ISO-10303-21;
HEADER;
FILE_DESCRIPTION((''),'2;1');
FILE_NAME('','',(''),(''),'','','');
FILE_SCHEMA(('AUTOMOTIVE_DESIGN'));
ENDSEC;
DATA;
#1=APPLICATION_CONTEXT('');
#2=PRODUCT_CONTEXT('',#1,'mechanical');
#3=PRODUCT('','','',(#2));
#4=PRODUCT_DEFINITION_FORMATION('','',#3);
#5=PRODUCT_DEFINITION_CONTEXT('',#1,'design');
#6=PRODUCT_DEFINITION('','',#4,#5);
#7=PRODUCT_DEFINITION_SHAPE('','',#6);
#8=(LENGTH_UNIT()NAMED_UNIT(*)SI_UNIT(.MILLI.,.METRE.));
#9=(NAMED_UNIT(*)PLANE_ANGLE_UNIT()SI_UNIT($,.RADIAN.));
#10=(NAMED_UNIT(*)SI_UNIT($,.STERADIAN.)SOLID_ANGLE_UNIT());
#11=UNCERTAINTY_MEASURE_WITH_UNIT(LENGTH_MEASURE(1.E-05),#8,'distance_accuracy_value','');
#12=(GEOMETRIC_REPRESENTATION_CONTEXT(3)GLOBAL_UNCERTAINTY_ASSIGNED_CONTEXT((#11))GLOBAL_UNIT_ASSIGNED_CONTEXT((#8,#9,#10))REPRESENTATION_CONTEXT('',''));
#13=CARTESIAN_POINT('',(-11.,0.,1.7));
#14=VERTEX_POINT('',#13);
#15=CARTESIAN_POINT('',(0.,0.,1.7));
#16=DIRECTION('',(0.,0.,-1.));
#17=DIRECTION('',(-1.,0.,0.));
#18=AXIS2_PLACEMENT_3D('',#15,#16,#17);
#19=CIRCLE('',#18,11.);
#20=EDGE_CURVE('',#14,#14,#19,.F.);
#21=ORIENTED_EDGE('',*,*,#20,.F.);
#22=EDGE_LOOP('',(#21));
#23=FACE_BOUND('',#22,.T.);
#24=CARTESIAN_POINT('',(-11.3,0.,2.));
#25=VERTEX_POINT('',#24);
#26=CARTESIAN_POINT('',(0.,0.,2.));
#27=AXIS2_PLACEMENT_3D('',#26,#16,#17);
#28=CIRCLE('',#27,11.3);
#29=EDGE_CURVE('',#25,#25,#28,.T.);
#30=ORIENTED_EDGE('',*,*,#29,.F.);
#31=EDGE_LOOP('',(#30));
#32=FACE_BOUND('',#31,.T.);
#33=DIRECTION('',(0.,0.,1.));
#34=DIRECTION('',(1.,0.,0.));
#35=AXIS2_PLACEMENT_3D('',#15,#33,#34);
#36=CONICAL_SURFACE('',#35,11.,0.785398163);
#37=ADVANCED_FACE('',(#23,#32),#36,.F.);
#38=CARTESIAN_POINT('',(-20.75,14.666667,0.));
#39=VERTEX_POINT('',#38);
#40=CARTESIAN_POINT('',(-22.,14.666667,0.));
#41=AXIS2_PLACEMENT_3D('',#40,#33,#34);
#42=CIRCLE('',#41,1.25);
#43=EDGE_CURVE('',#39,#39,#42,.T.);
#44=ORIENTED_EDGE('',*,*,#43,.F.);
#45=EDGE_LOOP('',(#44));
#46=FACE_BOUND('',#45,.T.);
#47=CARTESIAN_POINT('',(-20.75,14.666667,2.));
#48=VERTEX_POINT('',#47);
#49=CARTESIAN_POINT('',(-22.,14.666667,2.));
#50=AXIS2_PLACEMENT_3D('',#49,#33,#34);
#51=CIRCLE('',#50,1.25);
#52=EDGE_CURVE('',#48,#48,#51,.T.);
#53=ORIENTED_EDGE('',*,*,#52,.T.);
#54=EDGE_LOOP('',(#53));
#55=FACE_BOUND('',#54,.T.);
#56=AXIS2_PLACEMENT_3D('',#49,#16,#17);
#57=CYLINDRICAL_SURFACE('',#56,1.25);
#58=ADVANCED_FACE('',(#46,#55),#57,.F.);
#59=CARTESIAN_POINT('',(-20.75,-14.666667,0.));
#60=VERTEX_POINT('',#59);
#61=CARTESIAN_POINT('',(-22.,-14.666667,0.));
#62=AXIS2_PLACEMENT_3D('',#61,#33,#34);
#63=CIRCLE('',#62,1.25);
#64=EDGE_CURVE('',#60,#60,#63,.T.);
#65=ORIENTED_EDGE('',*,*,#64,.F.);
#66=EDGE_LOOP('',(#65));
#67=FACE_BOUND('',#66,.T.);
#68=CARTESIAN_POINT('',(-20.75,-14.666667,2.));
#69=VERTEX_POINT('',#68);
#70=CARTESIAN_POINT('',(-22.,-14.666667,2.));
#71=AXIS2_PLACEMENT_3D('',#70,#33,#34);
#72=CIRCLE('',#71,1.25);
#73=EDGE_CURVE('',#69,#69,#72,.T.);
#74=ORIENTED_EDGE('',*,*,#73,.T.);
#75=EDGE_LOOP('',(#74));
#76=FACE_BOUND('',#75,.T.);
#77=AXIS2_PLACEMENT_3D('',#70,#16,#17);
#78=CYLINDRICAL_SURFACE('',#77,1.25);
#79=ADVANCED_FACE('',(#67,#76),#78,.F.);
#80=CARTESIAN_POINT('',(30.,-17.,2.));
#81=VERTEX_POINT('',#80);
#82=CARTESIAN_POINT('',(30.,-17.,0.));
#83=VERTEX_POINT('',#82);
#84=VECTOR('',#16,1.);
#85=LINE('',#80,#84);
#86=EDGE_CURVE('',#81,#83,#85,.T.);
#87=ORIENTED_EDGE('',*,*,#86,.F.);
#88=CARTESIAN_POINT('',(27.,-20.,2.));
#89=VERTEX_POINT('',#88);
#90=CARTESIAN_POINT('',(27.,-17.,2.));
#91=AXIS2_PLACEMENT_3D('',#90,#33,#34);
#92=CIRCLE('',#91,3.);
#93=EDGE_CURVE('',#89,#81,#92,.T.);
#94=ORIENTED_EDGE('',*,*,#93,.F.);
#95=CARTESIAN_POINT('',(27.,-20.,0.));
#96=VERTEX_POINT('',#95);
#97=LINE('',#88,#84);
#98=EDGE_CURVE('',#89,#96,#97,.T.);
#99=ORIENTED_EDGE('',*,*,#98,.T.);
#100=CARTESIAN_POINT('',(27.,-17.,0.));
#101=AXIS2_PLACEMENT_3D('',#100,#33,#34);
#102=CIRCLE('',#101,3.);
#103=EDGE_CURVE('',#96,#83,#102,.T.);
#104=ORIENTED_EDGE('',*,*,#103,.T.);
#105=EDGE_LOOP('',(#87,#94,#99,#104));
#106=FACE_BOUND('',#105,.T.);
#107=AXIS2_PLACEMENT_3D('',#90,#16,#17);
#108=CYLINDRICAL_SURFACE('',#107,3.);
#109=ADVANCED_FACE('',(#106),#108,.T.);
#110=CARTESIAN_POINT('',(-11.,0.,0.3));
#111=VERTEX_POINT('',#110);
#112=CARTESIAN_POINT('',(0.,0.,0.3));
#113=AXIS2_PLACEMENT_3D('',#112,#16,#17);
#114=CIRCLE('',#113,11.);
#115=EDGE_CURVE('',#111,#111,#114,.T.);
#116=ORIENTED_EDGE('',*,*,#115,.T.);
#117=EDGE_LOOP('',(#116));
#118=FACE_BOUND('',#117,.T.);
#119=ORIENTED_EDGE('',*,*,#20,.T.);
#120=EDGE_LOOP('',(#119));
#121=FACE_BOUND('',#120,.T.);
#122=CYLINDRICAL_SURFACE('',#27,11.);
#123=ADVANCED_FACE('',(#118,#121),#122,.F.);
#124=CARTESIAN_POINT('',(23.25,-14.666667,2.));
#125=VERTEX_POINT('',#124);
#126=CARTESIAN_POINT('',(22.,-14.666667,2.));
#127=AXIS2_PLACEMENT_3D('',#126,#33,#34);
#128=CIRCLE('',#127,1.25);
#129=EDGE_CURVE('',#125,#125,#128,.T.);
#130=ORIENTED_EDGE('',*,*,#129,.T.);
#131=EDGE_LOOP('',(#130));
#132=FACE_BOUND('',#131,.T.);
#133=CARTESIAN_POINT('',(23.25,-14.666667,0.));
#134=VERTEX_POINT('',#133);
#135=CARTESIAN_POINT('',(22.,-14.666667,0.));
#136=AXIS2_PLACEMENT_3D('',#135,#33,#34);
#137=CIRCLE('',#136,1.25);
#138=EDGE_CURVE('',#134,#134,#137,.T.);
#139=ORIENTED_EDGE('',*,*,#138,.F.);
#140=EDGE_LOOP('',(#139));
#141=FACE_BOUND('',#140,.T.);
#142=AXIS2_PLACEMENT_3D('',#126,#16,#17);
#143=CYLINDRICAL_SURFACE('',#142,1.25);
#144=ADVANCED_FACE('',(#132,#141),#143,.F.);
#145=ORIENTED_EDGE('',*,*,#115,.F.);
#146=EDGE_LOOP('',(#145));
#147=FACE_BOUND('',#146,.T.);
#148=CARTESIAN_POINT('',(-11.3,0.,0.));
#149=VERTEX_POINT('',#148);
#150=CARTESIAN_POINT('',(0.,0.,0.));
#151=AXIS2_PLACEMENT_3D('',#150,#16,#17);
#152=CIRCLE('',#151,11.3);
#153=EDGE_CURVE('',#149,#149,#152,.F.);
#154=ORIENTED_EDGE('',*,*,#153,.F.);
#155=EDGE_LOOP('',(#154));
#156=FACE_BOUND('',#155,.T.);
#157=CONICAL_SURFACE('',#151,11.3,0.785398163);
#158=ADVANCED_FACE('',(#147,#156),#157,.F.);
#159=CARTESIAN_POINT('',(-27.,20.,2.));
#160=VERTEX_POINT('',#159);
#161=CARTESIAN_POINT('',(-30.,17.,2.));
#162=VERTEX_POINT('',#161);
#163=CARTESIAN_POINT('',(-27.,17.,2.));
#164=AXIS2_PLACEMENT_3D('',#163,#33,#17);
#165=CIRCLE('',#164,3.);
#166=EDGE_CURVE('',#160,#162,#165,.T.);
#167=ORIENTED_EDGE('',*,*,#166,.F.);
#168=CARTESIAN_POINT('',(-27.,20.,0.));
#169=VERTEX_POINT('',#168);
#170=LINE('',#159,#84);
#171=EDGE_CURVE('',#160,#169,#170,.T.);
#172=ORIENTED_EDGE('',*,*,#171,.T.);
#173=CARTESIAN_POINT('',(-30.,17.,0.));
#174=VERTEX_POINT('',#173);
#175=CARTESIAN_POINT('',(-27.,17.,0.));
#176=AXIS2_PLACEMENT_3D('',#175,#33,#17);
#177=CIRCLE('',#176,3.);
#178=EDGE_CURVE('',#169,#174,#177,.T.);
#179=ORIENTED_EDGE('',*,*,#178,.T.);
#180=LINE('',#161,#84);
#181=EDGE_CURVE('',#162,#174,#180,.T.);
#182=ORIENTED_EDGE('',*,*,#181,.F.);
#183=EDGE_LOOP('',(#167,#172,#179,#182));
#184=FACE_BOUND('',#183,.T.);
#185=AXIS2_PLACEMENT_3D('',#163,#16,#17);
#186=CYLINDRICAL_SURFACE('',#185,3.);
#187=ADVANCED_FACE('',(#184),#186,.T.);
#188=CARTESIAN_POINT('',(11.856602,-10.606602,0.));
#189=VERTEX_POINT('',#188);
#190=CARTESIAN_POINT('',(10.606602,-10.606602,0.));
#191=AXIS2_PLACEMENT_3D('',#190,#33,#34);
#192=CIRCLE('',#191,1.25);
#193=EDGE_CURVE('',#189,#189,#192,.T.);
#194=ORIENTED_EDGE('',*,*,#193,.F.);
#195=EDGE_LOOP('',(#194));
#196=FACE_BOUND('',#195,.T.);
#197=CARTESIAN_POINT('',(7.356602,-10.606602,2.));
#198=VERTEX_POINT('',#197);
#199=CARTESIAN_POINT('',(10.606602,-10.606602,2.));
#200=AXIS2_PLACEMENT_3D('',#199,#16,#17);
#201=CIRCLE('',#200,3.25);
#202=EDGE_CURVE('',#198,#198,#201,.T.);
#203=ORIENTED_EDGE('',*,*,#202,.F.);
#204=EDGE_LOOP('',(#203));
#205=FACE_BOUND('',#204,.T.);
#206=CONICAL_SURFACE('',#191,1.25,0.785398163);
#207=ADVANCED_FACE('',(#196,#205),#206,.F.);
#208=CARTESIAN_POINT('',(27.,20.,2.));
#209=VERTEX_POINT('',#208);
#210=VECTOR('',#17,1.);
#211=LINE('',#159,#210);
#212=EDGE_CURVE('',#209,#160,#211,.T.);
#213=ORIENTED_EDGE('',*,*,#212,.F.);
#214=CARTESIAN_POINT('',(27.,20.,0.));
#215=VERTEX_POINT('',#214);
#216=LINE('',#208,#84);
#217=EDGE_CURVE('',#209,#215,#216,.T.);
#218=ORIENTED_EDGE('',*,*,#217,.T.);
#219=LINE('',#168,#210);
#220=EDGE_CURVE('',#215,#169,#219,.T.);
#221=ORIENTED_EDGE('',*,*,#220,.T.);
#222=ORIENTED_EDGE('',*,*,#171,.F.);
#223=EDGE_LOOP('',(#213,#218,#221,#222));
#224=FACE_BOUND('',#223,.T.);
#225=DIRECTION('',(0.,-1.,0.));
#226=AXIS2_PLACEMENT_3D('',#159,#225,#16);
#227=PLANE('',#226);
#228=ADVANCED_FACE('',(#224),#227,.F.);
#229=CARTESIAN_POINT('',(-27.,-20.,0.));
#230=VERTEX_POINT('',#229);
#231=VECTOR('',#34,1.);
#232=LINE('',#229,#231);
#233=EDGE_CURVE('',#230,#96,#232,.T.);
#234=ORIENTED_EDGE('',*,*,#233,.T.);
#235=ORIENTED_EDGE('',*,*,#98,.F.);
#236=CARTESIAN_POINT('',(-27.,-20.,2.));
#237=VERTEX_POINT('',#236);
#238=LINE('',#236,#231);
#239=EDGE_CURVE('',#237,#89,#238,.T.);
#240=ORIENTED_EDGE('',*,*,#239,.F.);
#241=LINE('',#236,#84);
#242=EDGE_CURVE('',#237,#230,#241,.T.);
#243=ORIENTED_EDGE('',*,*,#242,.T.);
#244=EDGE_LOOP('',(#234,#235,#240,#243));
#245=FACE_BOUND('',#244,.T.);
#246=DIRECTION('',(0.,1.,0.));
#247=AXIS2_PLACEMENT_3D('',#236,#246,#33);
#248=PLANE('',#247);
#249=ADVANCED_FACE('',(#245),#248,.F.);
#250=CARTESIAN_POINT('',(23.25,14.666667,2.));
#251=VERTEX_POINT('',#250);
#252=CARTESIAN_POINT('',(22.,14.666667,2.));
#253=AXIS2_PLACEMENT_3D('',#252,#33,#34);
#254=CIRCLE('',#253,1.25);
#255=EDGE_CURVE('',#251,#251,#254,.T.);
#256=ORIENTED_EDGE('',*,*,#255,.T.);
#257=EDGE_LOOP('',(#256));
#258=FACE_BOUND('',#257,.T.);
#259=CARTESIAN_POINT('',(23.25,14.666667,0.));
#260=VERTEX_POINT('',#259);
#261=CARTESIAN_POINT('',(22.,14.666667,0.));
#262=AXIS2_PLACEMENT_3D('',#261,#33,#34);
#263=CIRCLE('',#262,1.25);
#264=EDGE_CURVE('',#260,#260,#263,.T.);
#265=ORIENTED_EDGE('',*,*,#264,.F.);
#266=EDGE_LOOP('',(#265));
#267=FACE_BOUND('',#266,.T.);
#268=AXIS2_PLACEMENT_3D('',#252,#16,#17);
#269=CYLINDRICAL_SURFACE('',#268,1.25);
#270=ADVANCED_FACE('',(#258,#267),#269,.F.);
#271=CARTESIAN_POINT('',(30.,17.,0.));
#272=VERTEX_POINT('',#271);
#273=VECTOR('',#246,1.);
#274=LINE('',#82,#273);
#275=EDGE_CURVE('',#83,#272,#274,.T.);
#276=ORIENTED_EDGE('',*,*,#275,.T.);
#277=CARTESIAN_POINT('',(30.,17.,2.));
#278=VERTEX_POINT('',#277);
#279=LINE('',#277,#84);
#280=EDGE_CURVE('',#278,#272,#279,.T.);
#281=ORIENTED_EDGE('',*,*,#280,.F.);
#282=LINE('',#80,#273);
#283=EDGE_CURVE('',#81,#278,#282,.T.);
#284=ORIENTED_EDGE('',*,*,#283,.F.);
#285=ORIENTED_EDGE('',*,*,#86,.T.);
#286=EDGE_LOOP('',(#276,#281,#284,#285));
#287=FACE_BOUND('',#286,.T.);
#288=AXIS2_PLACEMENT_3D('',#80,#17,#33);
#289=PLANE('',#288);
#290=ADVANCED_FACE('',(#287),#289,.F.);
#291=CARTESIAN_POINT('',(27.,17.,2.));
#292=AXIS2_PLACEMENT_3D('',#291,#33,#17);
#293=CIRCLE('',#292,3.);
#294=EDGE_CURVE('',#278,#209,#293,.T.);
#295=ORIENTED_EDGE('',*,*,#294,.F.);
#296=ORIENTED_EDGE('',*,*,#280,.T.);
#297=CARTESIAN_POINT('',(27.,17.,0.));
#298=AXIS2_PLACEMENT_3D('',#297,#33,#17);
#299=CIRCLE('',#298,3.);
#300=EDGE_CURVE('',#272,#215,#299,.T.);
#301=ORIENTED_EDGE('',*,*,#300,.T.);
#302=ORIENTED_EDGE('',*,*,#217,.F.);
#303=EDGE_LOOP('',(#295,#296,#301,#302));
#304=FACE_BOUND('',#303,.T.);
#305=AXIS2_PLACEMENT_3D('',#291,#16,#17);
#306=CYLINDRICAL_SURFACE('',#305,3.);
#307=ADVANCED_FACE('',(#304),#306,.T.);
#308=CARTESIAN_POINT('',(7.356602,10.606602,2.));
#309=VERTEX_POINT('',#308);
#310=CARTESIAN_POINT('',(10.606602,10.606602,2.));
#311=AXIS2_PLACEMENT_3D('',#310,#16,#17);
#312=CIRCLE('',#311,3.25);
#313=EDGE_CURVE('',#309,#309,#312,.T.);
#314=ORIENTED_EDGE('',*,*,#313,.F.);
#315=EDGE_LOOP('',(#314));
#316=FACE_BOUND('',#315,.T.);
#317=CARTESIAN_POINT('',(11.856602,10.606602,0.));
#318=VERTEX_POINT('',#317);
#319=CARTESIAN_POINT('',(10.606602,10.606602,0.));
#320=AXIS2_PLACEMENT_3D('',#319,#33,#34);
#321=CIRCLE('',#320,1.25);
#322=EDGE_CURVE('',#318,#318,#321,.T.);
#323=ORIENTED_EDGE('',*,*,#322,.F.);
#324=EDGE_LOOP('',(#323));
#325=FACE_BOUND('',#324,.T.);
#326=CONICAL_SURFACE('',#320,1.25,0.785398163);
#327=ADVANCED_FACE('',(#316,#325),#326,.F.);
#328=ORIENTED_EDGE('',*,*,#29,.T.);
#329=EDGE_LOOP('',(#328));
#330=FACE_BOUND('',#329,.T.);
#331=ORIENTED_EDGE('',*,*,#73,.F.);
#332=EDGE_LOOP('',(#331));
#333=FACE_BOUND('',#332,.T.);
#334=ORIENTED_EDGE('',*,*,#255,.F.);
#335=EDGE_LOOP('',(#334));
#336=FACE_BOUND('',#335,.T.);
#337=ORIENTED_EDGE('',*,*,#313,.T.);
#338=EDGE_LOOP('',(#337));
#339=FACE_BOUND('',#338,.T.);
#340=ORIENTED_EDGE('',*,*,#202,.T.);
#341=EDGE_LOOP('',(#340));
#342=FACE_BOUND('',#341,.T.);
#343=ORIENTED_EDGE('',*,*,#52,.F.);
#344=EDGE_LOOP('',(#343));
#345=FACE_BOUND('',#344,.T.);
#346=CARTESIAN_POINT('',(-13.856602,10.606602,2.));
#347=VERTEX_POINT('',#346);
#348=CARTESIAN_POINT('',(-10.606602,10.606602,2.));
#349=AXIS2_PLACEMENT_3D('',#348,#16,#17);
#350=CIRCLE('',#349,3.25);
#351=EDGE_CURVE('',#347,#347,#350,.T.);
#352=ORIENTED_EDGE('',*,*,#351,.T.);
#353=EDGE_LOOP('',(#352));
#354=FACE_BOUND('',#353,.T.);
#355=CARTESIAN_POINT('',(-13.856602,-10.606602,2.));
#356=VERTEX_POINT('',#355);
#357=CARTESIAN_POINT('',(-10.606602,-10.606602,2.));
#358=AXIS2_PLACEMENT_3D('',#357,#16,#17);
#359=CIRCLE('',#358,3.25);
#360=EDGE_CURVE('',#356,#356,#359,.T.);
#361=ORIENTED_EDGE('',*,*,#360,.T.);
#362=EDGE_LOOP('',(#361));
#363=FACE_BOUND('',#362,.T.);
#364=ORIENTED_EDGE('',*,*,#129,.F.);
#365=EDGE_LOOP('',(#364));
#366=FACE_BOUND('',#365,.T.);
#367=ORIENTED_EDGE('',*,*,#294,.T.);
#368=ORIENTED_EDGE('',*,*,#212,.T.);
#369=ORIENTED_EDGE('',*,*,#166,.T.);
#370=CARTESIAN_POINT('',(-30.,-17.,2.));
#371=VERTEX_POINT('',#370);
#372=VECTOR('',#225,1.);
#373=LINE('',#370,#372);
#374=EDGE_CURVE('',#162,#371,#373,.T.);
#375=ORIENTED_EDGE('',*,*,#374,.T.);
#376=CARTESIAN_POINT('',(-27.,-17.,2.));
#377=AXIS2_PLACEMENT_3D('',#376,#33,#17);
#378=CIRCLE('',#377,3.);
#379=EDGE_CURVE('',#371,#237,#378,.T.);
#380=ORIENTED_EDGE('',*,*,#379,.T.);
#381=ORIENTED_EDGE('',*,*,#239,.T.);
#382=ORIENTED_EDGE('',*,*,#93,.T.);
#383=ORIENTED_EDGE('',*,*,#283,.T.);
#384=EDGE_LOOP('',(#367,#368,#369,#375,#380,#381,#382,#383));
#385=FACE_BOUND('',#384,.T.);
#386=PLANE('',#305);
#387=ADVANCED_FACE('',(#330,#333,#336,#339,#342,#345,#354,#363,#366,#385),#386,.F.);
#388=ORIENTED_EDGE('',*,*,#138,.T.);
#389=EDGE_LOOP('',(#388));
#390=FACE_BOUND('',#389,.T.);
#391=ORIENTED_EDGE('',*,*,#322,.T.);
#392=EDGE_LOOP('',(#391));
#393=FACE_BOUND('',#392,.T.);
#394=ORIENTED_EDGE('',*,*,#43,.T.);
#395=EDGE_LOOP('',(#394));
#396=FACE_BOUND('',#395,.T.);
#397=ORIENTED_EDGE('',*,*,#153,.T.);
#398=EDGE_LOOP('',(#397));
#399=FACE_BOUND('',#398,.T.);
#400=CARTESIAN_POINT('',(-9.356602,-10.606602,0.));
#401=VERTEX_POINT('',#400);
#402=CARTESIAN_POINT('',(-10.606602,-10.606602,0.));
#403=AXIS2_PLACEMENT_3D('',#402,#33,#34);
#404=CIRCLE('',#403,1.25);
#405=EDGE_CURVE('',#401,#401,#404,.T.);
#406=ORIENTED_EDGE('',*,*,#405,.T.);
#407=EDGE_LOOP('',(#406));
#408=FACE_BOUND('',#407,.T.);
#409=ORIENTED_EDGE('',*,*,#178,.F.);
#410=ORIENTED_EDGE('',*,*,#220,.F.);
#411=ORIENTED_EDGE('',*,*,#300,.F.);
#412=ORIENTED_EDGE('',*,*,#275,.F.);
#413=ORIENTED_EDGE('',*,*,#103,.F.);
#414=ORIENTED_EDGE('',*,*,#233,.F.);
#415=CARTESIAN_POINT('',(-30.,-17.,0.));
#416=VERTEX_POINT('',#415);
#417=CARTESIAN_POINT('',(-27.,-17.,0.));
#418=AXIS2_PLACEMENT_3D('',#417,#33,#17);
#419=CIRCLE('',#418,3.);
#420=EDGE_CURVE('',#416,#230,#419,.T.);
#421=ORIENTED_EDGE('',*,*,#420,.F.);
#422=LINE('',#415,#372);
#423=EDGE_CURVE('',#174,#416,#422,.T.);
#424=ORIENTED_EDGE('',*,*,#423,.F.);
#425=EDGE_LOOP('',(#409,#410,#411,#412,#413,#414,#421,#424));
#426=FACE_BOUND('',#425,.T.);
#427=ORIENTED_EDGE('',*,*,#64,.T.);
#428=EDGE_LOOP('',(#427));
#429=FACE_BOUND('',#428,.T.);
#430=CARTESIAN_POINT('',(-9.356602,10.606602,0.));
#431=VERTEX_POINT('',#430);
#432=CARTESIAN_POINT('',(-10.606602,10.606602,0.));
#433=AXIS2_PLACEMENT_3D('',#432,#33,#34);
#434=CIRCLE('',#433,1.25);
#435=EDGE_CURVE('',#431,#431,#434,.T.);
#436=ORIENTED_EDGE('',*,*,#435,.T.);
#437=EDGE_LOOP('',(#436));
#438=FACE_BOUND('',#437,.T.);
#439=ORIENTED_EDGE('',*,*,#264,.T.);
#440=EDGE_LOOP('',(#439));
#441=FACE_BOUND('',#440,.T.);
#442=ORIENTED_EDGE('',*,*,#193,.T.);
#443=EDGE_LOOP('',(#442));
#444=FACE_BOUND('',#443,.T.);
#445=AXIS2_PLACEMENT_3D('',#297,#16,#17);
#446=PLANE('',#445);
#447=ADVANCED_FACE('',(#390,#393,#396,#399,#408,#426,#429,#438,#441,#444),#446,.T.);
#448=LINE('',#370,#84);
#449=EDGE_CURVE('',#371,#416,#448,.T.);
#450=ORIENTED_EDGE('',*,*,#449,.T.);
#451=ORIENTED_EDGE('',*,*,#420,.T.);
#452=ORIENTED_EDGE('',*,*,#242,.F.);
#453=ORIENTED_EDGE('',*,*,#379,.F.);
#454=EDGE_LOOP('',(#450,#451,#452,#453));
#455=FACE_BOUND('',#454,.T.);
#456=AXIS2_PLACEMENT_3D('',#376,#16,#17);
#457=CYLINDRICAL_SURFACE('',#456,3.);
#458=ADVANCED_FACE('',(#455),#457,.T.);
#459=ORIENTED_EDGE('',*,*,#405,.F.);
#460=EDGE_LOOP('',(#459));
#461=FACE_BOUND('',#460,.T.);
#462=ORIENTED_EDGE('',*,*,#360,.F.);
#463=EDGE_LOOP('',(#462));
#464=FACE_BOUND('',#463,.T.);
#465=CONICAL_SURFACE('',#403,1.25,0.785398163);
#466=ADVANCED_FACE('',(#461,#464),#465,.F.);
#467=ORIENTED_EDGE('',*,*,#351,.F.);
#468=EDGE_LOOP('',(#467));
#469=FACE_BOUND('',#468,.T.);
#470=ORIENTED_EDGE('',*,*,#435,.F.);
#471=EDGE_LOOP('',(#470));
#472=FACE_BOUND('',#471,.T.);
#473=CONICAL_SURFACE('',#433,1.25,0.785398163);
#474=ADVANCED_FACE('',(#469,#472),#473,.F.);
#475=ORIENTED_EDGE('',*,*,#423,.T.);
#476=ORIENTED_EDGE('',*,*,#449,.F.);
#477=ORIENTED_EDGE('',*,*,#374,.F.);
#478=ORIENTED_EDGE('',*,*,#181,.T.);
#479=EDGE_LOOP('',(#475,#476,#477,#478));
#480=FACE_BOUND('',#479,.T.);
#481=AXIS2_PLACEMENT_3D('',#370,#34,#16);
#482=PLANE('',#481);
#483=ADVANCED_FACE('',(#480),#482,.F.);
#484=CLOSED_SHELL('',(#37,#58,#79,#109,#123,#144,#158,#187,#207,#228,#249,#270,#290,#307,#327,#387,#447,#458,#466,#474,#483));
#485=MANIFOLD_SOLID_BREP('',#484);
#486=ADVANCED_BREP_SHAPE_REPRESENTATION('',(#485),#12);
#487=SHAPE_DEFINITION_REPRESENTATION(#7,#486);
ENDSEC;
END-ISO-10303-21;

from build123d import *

# Parameters (mm, degrees)
SZKIC1_R                    = 11
SZKIC1_R_2                  = 1.25
DODANIE_WYCI_GNI_CIE1_DEPTH = 2
SFAZOWANIE1_SIZE            = 0.3
SFAZOWANIE2_SIZE            = 2


with BuildPart() as part:
    # Szkic1 → Dodanie-wyciągnięcie1 (new body)
    with BuildSketch(Plane.XY):
        with BuildLine():
            Line((-27, -20), (27, -20))
            ThreePointArc((27, -20), (29.121320344, -19.121320344), (30, -17))
            Line((30, -17), (30, 17))
            ThreePointArc((30, 17), (29.121320344, 19.121320344), (27, 20))
            Line((27, 20), (-27, 20))
            ThreePointArc((-27, 20), (-29.121320344, 19.121320344), (-30, 17))
            Line((-30, 17), (-30, -17))
            ThreePointArc((-30, -17), (-29.121320344, -19.121320344), (-27, -20))
        make_face()
        Circle(SZKIC1_R, mode=Mode.SUBTRACT)
        with Locations((-22, 14.666666667)):
            Circle(SZKIC1_R_2, mode=Mode.SUBTRACT)
        with Locations((22, 14.666666667)):
            Circle(SZKIC1_R_2, mode=Mode.SUBTRACT)
        with Locations((22, -14.666666667)):
            Circle(SZKIC1_R_2, mode=Mode.SUBTRACT)
        with Locations((-10.606601718, -10.606601718)):
            Circle(SZKIC1_R_2, mode=Mode.SUBTRACT)
        with Locations((10.606601718, -10.606601718)):
            Circle(SZKIC1_R_2, mode=Mode.SUBTRACT)
        with Locations((10.606601718, 10.606601718)):
            Circle(SZKIC1_R_2, mode=Mode.SUBTRACT)
        with Locations((-10.606601718, 10.606601718)):
            Circle(SZKIC1_R_2, mode=Mode.SUBTRACT)
        with Locations((-22, -14.666666667)):
            Circle(SZKIC1_R_2, mode=Mode.SUBTRACT)
    extrude(amount=DODANIE_WYCI_GNI_CIE1_DEPTH)

    # Sfazowanie1
    sfazowanie1_edges = [part.edges().sort_by_distance(p)[0] for p in [
        (-11, 0, 0),
        (-11, 0, 2),
    ]]
    chamfer(sfazowanie1_edges, length=SFAZOWANIE1_SIZE)

    # Sfazowanie2
    sfazowanie2_edges = [part.edges().sort_by_distance(p)[0] for p in [
        (-11.856601718, -10.606601718, 2),
        (9.356601718, -10.606601718, 2),
        (9.356601718, 10.606601718, 2),
        (-11.856601718, 10.606601718, 2),
    ]]
    chamfer(sfazowanie2_edges, length=SFAZOWANIE2_SIZE - 0.0001)  # a hair under: the kernel refuses the full size


solid = part.part
